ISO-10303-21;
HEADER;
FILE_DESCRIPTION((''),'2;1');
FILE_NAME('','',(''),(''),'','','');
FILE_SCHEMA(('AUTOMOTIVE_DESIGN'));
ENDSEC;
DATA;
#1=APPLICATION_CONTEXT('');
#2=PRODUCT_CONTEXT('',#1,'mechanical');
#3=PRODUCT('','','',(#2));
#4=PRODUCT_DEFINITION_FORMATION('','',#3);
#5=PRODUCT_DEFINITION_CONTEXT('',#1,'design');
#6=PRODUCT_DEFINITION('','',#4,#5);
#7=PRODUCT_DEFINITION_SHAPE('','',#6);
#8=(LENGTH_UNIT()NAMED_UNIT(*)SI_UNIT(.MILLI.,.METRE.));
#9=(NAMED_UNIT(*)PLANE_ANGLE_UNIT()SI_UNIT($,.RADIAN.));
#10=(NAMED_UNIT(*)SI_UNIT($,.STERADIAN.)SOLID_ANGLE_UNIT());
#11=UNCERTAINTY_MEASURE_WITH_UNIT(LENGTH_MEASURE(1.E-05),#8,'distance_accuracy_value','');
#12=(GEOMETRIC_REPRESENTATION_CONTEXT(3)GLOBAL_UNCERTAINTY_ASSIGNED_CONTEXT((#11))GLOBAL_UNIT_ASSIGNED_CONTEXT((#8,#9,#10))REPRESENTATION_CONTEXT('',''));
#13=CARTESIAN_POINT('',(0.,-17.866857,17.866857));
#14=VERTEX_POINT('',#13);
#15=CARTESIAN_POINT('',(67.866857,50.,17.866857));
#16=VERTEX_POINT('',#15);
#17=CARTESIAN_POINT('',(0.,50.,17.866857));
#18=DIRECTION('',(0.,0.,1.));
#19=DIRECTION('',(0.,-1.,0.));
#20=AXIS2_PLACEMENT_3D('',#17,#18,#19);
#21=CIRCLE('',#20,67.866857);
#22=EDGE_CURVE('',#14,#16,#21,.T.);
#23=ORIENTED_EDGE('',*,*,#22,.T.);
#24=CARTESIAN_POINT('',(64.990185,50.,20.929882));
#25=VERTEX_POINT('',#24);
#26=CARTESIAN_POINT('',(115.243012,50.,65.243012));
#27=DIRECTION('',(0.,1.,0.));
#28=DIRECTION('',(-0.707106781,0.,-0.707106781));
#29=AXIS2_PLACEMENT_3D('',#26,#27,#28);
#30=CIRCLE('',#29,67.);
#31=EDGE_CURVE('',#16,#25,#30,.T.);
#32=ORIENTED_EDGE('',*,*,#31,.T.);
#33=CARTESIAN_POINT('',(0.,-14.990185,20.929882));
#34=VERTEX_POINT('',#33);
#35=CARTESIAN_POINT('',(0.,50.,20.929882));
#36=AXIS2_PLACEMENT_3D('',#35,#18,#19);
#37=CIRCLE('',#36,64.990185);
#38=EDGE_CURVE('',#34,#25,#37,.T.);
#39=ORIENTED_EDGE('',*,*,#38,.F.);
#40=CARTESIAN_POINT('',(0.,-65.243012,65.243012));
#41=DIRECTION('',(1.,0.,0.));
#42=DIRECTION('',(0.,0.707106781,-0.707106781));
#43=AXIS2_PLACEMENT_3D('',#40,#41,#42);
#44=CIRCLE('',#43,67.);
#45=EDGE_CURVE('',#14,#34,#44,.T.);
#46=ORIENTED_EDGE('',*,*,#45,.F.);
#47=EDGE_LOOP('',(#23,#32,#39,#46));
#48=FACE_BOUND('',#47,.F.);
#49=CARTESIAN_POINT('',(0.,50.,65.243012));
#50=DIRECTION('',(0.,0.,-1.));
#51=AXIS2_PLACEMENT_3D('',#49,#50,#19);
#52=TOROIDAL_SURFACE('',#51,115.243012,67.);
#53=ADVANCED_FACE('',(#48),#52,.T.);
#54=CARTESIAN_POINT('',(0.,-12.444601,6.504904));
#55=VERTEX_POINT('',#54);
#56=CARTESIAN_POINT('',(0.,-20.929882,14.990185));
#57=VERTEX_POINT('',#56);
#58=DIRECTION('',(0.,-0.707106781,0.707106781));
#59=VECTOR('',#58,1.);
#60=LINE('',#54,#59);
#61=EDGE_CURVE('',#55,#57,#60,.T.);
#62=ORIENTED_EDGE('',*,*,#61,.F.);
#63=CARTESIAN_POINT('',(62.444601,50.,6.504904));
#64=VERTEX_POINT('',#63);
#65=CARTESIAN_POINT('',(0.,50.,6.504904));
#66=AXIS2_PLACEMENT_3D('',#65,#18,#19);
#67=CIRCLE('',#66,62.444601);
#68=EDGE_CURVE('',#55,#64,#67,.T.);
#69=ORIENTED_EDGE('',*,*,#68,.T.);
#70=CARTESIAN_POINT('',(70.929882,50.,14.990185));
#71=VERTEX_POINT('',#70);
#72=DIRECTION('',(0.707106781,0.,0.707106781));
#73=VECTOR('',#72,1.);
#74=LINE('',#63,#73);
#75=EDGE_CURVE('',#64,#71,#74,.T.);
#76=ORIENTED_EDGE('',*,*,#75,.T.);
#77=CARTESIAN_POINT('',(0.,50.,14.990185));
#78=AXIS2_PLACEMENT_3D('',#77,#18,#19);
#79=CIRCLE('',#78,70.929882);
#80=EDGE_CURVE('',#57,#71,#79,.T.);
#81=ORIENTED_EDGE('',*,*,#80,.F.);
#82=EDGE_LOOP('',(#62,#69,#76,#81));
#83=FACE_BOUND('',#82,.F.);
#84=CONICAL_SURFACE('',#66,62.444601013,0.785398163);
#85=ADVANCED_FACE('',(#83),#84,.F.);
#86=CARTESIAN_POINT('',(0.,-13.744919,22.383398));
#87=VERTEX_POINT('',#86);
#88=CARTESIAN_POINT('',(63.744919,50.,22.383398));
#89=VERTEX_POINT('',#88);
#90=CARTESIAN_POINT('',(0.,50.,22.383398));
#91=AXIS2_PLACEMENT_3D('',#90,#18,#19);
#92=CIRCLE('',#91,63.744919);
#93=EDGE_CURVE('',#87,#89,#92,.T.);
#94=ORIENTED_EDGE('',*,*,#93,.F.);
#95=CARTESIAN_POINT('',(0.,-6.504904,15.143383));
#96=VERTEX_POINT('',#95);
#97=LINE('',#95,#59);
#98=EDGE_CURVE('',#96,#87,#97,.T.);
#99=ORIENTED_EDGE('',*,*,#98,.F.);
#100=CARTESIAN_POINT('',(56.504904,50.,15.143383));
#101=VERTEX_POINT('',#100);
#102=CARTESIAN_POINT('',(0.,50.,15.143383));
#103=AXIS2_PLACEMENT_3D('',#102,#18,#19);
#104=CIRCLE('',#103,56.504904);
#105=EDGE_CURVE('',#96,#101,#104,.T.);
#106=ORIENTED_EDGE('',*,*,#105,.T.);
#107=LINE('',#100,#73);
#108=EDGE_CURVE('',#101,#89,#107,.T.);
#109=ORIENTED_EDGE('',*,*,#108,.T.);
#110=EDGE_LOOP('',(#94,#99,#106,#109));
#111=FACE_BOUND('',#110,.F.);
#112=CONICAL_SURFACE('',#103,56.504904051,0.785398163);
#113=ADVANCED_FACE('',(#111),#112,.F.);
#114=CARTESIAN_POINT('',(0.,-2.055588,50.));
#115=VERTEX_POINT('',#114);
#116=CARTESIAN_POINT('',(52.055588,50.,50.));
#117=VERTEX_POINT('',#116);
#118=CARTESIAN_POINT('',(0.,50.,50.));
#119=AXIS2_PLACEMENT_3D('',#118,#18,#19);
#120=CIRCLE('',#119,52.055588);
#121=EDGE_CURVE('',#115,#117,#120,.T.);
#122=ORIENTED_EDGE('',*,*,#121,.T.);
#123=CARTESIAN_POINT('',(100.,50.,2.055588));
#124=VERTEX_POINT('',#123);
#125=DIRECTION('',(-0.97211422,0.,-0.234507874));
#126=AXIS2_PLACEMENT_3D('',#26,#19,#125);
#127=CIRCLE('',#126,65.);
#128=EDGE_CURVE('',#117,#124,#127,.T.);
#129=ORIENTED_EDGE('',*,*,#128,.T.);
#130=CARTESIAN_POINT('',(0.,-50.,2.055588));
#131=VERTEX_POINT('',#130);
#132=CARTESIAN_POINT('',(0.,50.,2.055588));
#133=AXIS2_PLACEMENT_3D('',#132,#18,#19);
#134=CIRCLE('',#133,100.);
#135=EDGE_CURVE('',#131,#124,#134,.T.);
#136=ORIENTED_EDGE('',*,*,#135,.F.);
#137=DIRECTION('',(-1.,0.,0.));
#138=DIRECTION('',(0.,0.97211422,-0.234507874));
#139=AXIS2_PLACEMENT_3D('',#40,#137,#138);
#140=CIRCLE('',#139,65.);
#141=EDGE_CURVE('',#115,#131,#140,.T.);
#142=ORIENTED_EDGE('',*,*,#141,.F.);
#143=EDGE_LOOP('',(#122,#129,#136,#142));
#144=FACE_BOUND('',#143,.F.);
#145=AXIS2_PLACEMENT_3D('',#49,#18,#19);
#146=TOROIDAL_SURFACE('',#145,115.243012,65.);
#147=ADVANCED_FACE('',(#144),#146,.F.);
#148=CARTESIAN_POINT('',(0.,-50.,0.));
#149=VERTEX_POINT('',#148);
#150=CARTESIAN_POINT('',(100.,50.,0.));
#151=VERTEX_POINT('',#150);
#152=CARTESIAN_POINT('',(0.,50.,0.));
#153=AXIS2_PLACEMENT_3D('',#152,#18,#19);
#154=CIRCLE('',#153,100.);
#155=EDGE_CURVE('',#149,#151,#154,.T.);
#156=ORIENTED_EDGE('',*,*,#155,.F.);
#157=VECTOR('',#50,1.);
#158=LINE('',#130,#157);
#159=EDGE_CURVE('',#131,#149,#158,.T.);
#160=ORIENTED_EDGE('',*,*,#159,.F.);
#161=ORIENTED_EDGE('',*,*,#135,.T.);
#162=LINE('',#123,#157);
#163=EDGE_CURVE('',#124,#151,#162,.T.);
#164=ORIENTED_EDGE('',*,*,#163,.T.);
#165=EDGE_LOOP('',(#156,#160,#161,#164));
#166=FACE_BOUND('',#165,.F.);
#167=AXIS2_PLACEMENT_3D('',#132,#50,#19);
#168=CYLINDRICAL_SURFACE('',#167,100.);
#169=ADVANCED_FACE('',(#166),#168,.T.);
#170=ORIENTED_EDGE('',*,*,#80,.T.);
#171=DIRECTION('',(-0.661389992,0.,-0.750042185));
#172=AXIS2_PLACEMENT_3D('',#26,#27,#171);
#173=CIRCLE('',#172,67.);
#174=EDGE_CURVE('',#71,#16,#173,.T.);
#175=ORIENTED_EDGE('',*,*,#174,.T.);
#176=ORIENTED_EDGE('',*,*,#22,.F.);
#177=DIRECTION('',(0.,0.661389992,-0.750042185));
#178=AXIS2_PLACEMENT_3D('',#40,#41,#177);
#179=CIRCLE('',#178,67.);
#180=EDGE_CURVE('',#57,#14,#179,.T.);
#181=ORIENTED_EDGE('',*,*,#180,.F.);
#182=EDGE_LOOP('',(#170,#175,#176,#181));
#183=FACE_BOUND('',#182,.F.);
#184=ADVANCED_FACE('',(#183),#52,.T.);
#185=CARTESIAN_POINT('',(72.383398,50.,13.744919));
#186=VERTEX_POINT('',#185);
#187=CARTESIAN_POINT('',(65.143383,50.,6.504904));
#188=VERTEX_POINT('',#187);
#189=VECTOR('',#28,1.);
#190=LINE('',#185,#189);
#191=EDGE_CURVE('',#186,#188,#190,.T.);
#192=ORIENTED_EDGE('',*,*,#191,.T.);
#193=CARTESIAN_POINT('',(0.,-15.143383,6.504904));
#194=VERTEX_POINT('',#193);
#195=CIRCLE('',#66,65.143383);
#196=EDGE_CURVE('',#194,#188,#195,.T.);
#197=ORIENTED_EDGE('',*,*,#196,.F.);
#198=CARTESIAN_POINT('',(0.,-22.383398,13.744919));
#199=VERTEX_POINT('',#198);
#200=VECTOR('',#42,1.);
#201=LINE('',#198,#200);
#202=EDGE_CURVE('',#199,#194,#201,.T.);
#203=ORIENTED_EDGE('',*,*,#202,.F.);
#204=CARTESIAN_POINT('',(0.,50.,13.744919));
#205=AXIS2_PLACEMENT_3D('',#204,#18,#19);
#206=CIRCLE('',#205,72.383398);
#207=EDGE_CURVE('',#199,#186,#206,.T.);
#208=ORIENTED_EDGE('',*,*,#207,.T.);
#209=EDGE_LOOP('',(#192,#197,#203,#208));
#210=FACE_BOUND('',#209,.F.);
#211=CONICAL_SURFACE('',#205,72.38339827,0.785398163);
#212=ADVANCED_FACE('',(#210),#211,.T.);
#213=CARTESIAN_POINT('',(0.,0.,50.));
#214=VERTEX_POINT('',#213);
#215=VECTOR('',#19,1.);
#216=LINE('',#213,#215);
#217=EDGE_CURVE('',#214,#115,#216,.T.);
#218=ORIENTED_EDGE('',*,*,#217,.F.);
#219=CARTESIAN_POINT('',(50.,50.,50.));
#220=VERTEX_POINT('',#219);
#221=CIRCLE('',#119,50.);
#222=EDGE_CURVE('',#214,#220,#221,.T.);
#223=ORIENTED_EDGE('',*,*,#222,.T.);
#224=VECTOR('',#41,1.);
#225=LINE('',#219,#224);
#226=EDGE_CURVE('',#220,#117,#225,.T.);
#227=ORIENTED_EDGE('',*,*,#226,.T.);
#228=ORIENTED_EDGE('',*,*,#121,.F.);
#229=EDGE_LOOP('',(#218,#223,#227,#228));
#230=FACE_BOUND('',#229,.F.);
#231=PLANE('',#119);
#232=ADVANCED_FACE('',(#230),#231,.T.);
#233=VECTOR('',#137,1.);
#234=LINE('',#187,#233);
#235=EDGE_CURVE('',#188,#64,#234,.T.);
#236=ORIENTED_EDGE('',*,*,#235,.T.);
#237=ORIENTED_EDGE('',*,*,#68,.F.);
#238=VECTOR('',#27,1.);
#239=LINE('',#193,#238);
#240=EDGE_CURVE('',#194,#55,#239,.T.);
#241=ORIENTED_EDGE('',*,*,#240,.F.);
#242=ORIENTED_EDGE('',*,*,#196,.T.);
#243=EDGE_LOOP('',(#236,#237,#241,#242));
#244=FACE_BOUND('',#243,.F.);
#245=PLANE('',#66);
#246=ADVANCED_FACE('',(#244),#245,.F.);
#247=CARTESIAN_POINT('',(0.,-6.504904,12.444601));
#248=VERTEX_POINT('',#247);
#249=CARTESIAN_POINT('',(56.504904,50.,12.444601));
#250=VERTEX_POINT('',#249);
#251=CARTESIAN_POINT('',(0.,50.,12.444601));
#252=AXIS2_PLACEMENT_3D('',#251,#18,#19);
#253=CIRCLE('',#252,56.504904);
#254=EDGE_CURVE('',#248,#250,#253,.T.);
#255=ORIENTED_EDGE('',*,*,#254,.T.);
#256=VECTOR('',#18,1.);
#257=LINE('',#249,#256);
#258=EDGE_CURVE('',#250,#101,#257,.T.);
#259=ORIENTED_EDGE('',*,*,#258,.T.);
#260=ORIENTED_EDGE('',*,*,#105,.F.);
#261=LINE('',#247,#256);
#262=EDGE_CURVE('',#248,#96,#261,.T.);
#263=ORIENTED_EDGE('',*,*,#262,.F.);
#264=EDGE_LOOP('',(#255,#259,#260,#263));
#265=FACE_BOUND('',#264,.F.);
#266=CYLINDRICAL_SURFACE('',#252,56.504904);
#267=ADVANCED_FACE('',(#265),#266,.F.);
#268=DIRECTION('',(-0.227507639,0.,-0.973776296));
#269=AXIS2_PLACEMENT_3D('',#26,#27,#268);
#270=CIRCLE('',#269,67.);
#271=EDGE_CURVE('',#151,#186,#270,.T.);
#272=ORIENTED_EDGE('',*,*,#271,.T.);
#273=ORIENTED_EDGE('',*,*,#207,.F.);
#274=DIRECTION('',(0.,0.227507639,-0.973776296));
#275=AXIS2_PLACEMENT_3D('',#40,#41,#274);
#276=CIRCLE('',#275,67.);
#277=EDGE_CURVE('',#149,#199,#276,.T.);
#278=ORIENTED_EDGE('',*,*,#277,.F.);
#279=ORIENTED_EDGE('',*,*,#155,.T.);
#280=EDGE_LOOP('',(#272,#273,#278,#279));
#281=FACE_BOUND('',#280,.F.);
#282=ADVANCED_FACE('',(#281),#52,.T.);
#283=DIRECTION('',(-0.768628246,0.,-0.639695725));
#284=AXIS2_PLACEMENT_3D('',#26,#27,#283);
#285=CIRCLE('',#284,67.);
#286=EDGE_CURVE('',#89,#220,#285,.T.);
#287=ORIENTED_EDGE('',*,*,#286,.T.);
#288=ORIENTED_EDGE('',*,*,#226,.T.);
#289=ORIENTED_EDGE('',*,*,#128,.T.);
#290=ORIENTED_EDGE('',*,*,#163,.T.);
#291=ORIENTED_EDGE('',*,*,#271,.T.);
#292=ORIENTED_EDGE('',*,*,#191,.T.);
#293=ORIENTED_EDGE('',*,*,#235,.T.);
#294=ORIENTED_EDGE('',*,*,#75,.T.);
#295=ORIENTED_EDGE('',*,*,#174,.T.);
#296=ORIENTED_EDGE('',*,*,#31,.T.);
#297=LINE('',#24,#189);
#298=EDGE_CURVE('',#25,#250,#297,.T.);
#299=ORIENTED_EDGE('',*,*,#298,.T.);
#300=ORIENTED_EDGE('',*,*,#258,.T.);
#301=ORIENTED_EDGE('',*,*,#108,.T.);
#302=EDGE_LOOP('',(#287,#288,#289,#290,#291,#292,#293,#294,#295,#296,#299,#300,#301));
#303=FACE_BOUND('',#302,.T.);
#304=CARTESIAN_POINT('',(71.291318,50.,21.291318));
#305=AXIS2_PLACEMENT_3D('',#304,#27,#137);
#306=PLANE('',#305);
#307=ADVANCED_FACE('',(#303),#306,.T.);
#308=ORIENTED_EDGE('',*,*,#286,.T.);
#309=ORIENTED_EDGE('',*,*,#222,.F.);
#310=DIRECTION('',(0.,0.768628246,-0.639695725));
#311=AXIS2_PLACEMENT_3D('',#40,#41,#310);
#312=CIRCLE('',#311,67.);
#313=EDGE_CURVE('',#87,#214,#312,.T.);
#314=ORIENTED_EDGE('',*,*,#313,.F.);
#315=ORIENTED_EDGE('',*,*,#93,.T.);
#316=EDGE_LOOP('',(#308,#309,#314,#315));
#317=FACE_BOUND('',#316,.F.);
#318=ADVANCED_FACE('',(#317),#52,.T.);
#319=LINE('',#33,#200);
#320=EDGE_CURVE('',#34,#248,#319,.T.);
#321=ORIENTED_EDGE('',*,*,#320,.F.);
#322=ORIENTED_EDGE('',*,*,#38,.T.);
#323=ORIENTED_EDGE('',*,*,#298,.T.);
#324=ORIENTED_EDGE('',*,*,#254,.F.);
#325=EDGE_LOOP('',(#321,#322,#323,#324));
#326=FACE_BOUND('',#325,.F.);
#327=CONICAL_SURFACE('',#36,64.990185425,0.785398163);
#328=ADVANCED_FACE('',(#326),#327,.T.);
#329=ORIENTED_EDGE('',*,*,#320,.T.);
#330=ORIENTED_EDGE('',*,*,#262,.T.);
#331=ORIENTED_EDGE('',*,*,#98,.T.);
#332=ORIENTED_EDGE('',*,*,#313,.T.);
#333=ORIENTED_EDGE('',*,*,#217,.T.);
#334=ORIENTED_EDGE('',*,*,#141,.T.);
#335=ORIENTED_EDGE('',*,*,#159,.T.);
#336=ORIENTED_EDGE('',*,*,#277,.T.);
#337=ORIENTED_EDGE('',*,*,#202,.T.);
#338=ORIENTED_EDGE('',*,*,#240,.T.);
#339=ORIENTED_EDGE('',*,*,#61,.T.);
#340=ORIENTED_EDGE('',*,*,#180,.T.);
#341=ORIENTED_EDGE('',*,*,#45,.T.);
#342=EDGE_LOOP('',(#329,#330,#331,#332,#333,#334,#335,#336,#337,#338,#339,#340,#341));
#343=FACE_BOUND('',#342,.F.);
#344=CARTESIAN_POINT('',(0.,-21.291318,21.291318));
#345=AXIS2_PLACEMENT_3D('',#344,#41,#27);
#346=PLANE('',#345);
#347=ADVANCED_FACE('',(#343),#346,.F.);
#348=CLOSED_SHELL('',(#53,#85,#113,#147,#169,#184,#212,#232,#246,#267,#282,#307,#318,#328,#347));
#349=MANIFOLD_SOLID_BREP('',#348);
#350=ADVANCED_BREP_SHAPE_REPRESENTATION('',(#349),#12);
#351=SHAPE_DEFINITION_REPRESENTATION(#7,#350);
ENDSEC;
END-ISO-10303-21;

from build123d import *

# Parameters (mm, degrees)
F4_ANGLE = 90


# Not quite as in the source:
# - a feature names something its author has since deleted; it is built from what else it names


with BuildPart() as f4:
    # F1 (on Right) → F4 (revolve)
    with BuildSketch(Plane.YZ):
        with BuildLine():
            Line((-50, 2.0555875069), (-50, 0))
            ThreePointArc((-50, 0), (-35.3898801458, 5.2614268959), (-22.3833982704, 13.7449193584))
            ThreePointArc((-22.3833982704, 13.7449193584), (-21.6521933869, 14.3623617736), (-20.9298823871, 14.9901854251))
            ThreePointArc((-20.9298823871, 14.9901854251), (-19.3758122064, 16.40450242), (-17.8668574762, 17.8668574762))
            ThreePointArc((-17.8668574762, 17.8668574762), (-16.40450242, 19.3758122064), (-14.9901854251, 20.9298823871))
            ThreePointArc((-14.9901854251, 20.9298823871), (-14.3623617736, 21.6521933869), (-13.7449193584, 22.3833982704))
            ThreePointArc((-13.7449193584, 22.3833982704), (-5.2614268959, 35.3898801458), (0, 50))
            Line((0, 50), (-2.0555875069, 50))
            ThreePointArc((-2.0555875069, 50), (-19.2810710386, 19.2810710386), (-50, 2.0555875069))
        make_face()
        with BuildLine():
            ThreePointArc((-20.9298823871, 14.9901854251), (-21.6521933869, 14.3623617736), (-22.3833982704, 13.7449193584))
            Line((-22.3833982704, 13.7449193584), (-15.1433829629, 6.5049040509))
            Line((-15.1433829629, 6.5049040509), (-12.4446010129, 6.5049040509))
            Line((-12.4446010129, 6.5049040509), (-20.9298823871, 14.9901854251))
        make_face()
        with BuildLine():
            ThreePointArc((-13.7449193584, 22.3833982704), (-14.3623617736, 21.6521933869), (-14.9901854251, 20.9298823871))
            Line((-14.9901854251, 20.9298823871), (-6.5049040509, 12.4446010129))
            Line((-6.5049040509, 12.4446010129), (-6.5049040509, 15.1433829629))
            Line((-6.5049040509, 15.1433829629), (-13.7449193584, 22.3833982704))
        make_face()
    revolve(axis=Axis((0, 50, 28.3559039235), (0, 0, 1)), revolution_arc=F4_ANGLE)


solid = f4.part
